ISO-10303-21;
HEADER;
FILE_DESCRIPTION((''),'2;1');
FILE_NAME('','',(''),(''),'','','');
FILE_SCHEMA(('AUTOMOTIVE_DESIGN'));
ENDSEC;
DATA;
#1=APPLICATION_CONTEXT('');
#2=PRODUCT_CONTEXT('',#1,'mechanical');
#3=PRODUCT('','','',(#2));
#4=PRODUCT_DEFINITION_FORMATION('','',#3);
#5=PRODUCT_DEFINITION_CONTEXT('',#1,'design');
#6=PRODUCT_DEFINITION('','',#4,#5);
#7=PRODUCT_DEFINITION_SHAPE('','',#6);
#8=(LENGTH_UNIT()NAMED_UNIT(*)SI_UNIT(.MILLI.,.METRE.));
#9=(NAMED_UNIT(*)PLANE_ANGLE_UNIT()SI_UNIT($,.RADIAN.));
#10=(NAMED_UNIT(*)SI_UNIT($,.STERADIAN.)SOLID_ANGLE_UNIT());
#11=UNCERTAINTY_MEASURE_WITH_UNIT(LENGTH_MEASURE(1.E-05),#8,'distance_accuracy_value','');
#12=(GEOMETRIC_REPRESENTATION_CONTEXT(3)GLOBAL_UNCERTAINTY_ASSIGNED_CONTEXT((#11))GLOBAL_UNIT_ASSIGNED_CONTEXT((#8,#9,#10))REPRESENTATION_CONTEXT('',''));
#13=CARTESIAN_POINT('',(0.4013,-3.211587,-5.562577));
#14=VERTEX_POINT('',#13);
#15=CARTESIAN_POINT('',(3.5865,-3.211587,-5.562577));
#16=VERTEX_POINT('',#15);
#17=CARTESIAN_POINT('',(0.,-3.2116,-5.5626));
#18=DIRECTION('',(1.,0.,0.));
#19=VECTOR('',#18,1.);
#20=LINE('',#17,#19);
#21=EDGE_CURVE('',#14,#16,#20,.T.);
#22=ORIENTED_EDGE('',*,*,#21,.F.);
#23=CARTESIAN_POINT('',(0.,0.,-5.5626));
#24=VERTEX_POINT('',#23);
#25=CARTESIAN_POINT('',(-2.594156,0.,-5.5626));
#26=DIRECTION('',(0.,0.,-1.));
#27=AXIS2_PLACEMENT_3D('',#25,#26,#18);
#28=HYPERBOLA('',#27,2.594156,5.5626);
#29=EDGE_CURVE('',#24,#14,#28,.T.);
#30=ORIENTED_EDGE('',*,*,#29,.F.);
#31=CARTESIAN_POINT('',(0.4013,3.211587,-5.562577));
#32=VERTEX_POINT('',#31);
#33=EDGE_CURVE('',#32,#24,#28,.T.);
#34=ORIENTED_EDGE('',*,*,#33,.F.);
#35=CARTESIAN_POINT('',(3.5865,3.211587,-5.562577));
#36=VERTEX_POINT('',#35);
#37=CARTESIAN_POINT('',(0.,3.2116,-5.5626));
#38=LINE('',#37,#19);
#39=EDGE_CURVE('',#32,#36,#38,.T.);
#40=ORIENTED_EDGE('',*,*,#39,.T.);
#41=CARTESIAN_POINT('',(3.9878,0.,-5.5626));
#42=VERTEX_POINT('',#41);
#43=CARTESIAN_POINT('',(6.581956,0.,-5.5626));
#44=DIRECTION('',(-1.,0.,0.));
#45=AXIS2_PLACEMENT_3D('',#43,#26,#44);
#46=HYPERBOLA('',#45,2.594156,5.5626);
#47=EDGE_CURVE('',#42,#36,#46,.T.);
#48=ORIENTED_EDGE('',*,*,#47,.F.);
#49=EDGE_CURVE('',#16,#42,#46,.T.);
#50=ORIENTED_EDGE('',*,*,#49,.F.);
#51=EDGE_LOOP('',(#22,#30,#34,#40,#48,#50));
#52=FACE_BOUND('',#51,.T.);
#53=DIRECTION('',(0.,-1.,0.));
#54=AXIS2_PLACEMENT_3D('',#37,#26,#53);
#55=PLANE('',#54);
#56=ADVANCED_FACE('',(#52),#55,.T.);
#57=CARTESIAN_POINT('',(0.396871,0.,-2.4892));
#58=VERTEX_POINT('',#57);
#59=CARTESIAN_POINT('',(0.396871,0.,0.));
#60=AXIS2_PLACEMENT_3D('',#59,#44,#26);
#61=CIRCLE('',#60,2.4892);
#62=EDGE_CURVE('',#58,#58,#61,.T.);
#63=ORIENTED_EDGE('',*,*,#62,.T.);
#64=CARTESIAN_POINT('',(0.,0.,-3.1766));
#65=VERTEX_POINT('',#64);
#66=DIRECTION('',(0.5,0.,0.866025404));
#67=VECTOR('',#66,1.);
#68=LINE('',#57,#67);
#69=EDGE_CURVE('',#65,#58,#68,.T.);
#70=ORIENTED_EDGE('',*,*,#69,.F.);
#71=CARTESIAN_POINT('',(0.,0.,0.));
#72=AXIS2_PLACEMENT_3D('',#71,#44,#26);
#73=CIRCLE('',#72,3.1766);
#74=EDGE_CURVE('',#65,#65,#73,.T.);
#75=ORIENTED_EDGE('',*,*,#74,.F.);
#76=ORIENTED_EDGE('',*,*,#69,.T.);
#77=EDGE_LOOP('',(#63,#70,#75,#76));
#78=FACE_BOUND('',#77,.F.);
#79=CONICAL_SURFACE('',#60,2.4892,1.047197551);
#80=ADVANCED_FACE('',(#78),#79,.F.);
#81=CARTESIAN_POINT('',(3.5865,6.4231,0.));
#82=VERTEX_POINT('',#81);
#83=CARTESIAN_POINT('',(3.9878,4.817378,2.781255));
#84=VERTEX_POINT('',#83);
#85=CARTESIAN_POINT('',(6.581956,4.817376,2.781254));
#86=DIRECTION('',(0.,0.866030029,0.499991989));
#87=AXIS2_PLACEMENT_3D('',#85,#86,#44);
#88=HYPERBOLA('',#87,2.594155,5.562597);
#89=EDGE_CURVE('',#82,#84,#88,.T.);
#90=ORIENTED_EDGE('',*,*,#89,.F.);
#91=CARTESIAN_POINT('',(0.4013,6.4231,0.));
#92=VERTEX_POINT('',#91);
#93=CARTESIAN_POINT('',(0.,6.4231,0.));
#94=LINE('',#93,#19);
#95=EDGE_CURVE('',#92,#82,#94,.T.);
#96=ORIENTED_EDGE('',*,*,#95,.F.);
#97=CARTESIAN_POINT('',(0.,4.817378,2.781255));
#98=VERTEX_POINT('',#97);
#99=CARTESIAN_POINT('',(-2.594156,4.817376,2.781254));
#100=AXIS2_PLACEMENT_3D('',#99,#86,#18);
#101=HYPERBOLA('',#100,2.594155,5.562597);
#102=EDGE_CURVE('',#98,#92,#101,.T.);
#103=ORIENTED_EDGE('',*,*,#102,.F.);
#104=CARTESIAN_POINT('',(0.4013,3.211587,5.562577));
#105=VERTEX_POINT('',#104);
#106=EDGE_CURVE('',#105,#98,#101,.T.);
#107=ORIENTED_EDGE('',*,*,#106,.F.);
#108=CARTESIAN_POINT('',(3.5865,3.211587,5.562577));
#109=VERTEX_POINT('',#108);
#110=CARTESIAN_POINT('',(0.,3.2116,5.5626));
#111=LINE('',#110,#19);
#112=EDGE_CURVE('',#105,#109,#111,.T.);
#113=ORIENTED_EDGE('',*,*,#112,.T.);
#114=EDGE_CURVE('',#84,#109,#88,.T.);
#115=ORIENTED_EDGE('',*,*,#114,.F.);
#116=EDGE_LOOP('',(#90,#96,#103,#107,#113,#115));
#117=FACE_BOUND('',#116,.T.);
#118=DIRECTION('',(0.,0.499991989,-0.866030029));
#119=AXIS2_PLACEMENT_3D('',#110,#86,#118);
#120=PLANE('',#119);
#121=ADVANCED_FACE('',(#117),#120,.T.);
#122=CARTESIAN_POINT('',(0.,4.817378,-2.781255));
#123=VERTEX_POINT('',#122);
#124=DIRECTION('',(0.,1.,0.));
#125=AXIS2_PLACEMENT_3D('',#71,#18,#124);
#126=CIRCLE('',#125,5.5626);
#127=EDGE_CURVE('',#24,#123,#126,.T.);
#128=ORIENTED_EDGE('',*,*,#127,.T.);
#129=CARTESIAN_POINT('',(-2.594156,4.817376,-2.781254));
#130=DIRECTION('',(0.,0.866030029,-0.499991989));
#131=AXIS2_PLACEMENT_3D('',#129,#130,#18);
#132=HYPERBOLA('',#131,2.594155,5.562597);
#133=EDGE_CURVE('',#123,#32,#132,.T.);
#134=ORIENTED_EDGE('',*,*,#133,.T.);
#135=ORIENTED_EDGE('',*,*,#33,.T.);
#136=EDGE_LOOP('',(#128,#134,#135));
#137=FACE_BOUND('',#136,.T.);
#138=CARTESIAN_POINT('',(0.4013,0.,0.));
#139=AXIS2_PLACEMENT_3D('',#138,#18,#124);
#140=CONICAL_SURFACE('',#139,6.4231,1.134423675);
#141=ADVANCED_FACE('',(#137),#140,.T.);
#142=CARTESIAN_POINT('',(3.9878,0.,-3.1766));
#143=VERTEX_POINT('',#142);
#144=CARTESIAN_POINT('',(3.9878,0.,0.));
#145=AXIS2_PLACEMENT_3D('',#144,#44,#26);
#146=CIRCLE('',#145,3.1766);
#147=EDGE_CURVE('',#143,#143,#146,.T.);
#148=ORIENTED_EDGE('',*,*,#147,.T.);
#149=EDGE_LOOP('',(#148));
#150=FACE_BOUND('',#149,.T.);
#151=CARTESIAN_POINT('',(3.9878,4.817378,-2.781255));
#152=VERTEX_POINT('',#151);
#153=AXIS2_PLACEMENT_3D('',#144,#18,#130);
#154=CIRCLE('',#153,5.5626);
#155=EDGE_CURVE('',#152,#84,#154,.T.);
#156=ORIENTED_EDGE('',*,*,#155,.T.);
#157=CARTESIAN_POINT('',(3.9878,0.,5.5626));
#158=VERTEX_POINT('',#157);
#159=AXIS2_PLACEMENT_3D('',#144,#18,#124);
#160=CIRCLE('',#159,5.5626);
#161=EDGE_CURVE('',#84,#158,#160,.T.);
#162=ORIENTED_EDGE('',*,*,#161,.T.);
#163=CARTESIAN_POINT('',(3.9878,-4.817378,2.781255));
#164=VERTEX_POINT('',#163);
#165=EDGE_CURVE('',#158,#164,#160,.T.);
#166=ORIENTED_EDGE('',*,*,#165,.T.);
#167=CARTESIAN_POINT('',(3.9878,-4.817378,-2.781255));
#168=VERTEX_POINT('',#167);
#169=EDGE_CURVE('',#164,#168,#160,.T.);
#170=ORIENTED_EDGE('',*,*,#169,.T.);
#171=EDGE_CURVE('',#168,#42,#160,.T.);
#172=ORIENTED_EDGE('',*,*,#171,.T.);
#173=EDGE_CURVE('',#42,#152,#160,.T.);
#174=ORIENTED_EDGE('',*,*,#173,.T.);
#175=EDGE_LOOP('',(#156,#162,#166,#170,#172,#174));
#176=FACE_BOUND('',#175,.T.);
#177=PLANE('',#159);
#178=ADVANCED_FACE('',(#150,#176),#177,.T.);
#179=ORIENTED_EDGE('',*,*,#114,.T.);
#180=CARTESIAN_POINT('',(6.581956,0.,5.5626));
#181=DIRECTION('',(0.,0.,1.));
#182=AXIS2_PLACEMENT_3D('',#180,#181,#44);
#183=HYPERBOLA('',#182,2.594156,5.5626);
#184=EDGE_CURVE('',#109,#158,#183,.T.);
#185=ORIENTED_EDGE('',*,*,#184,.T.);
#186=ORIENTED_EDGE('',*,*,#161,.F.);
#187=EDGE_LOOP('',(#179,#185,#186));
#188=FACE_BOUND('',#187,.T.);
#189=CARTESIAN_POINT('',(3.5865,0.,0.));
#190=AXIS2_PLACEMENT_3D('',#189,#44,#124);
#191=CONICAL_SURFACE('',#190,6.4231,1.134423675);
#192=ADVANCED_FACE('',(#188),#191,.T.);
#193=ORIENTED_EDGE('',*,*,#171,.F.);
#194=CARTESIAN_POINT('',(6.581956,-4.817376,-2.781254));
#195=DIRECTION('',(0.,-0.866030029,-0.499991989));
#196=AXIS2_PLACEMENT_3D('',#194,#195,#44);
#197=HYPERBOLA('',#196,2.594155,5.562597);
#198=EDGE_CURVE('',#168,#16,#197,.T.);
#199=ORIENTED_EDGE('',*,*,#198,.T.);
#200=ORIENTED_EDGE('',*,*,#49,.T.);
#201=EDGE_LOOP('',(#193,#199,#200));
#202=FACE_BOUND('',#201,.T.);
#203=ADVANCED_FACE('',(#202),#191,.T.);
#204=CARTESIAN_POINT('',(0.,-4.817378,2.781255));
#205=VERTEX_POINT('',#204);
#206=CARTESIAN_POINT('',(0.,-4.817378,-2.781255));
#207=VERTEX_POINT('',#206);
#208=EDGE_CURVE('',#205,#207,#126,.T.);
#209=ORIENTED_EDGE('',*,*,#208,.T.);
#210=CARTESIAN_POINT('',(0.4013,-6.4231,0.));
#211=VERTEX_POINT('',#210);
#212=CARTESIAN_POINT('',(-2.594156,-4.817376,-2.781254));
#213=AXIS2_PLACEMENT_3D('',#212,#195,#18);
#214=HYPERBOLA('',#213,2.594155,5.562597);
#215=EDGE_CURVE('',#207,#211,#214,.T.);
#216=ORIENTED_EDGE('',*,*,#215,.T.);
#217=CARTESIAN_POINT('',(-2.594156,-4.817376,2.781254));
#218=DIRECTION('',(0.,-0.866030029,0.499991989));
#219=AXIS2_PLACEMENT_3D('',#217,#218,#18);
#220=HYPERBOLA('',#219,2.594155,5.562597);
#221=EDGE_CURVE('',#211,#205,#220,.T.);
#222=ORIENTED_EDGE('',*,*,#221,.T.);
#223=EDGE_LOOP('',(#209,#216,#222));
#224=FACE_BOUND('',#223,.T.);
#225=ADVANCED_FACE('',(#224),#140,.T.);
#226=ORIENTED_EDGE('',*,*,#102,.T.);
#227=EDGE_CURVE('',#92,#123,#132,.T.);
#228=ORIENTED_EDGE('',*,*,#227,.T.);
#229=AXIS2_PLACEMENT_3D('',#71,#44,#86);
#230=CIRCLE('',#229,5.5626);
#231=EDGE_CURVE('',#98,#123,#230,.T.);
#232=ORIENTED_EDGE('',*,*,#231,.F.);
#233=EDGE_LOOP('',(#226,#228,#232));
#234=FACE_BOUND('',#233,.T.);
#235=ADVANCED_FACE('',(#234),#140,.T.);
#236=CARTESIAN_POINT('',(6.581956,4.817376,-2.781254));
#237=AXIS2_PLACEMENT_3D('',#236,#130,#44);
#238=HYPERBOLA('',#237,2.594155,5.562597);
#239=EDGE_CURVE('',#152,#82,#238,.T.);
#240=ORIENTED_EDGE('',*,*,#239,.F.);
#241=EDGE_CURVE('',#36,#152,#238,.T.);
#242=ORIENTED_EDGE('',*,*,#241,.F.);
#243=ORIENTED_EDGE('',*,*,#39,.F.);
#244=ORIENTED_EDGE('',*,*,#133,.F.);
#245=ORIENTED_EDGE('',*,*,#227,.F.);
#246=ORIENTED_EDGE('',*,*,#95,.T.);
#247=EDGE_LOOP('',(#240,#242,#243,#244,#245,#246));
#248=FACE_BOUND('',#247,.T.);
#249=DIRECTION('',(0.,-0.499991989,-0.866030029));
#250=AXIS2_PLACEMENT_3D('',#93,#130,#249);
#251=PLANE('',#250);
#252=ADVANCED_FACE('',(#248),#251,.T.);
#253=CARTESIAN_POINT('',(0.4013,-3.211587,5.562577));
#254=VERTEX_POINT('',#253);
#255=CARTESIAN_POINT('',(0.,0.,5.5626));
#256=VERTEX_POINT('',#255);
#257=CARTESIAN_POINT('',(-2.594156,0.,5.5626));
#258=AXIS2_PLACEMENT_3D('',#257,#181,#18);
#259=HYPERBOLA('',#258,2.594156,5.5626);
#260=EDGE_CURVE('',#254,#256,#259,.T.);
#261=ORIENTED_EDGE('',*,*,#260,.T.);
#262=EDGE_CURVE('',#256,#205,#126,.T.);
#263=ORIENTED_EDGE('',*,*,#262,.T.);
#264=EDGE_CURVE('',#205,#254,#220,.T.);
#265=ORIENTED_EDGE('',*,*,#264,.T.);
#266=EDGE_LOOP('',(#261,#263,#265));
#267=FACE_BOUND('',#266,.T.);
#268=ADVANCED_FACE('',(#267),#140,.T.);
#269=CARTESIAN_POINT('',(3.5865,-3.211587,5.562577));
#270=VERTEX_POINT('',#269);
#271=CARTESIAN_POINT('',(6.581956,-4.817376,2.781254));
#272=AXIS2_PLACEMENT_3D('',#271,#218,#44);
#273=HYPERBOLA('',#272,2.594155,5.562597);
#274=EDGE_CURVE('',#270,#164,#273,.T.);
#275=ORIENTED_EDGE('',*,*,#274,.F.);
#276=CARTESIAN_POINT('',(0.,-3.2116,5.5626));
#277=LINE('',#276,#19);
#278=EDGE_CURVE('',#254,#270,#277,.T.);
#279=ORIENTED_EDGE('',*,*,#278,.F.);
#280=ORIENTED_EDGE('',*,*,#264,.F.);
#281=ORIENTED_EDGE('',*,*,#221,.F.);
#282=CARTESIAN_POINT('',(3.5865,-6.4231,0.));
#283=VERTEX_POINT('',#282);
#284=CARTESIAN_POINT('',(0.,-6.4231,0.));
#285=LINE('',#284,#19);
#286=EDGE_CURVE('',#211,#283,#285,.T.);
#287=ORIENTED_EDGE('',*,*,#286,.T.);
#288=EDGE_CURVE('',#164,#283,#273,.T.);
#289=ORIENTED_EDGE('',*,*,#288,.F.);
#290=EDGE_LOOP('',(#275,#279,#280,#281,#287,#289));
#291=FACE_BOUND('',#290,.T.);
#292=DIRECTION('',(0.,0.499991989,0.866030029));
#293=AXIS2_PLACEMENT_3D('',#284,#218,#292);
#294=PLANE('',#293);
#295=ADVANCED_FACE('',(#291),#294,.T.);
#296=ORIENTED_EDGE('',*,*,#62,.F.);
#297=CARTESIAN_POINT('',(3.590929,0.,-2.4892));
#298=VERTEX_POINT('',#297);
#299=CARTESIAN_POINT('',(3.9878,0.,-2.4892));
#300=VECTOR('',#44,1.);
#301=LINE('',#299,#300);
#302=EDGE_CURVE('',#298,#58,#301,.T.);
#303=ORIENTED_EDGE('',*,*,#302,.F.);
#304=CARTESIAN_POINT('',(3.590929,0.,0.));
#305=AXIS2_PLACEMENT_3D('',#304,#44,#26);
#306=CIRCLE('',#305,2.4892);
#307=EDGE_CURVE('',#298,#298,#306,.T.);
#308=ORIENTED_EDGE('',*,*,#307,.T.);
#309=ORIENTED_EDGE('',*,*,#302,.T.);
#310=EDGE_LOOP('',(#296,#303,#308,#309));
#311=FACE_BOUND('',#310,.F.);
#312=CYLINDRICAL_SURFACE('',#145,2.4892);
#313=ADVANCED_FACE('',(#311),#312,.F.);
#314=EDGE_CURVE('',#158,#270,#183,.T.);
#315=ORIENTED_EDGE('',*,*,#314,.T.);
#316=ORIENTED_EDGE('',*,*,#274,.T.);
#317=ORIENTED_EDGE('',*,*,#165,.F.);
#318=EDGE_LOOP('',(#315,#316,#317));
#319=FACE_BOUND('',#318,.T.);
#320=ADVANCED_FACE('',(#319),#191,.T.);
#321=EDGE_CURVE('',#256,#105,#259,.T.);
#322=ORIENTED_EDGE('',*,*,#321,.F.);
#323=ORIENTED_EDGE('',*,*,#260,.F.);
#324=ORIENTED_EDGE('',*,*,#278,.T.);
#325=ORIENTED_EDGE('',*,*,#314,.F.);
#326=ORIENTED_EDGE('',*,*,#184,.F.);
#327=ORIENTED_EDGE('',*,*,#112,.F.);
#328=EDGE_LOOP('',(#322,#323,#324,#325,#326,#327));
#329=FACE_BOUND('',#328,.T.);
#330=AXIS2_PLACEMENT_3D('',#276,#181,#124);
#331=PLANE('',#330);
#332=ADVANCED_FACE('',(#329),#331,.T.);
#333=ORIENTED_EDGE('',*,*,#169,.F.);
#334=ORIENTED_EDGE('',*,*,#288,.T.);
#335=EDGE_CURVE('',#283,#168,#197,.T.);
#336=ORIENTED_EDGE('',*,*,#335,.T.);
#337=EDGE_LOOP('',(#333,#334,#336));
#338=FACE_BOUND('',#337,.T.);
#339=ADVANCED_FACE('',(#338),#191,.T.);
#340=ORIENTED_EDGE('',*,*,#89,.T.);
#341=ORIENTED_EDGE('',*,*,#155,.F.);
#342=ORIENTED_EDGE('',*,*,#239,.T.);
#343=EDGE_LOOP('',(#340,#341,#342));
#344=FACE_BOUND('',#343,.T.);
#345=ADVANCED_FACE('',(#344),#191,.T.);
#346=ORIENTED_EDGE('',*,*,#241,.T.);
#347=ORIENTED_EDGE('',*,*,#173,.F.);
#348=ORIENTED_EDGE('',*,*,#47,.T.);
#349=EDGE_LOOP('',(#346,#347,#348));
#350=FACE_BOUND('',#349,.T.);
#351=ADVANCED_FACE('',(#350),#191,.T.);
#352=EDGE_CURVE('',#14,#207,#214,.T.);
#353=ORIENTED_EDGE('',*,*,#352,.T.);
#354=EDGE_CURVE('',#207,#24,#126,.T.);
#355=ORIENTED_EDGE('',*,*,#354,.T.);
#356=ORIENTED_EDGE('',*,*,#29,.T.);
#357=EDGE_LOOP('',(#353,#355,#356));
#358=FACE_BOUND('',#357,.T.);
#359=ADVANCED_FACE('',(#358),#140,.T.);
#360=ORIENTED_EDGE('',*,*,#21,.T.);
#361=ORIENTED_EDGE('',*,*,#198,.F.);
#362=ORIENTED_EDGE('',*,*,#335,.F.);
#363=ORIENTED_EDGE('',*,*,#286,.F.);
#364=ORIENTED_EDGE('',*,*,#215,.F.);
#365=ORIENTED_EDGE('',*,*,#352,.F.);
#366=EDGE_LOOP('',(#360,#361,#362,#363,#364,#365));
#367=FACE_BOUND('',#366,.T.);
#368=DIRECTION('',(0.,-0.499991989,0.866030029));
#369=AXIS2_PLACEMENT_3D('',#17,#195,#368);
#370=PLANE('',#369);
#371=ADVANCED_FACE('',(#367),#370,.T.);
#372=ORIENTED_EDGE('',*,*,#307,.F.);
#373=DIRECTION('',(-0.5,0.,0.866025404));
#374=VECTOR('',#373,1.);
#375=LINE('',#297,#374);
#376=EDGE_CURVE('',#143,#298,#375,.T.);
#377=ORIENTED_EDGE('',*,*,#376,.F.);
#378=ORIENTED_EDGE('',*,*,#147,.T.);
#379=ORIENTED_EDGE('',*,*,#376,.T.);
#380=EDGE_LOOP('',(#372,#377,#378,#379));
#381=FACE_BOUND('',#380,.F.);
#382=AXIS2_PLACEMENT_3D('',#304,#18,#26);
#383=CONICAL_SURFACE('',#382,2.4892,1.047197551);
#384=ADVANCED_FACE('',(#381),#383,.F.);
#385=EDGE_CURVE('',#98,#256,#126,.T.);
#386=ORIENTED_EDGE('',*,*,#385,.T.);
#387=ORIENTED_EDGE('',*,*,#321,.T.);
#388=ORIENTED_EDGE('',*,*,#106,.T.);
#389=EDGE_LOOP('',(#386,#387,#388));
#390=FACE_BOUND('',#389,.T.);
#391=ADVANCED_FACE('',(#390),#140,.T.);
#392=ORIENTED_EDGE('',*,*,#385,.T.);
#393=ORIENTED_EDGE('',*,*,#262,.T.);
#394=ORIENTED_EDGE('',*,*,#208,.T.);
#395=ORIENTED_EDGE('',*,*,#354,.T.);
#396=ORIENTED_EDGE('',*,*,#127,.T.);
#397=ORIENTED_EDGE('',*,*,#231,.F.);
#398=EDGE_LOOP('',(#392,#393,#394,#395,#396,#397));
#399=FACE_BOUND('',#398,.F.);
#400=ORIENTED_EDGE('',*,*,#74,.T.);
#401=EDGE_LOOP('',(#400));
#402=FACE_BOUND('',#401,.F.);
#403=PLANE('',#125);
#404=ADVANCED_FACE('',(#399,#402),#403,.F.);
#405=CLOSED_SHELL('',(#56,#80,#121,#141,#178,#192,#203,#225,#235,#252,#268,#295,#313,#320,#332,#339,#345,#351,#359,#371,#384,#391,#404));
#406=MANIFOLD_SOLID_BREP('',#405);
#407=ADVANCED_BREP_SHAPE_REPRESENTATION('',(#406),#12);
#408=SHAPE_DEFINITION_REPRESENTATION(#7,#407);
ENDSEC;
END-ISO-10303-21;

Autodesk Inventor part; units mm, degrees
ref_plane "YZ Plane" through (0, 0, 0) normal (1, 0, 0) x (0, 1, 0)
ref_plane "XZ Plane" through (0, 0, 0) normal (0, 1, 0) x (-1, 0, 0)
sketch "Boceto1" plane through (0, 0, 0) normal (1, 0, 0) x (0, 1, 0)
  line L0 (-6.4231, 0) -> (-3.2116, 5.5626)
  line L1 (-3.2116, 5.5626) -> (3.2116, 5.5626)
  line L2 (3.2116, 5.5626) -> (6.4231, 0)
  line L3 (6.4231, 0) -> (3.2116, -5.5626)
  line L4 (3.2116, -5.5626) -> (-3.2116, -5.5626)
  line L5 (-3.2116, -5.5626) -> (-6.4231, 0)
  point P0 (0, 0)
  point P1 (0, 0)
  dimension "d0" = 12.8463
extrude "Cuerpo" add sketch "Boceto1" along normal blind 3.9878
sketch "Boceto2" plane through (0, 0, 0) normal (0, 0, 1) x (1, 0, 0)
  line L0 (0, 3.2116) -> (0, 6.4231) projected
  line L1 (0, 6.4231) -> (3.9878, 6.4231) projected
  line L2 (3.9878, 3.2116) -> (3.9878, 6.4231) projected
  line L3 (-0.7976, 0) -> (4.7854, 0) projected
  line L4 (0.4013, 6.4231) -> (0, 5.5626)
  line L5 (3.5865, 6.4231) -> (3.9878, 5.5626)
  dimension "d3" = 25
  dimension "d4" = 25
  dimension "d5" = 11.1252
  dimension "d6" = 11.1252
revolve "Chaflán1" cut sketch "Boceto2" angle 360 about axis through (-10, 0, 0) along (1, 0, 0)
sketch "Boceto3" plane through (3.9878, 0, 0) normal (1, 0, 0) x (0, 0, -1)
  arc A0 (-2.7813, -4.8174) -> (2.7813, -4.8174) centre (0, 0) ccw projected
hole "Rosca" at (3.9878, 0, 0) direction (-1, 0, 0) diameter 4.9784 end through all thread size "1/4-20 UNC" class "2B" standard "ANSI Unified Screw Threads"
chamfer "Chaflán2" distance 0.6874 angle 30 1 edges at (3.9878, 0, 2.4892) measured on face at (3.9878, 4.5118, 0.1)
chamfer "Chaflán3" distance 0.6874 angle 30 1 edges at (0, 0, 2.4892) measured on face at (0, 4.5118, 0.1)
ref_plane "Work Plane1" through (-13.4678, 0, 0) normal (0, -0.8660254, -0.5) x (1, 0, 0)
equation "\"d0\" = 1.1547 * SW"
equation "\"d1\" = KOH"
equation "\"d3\" = ANG1"
equation "\"d4\" = ANG2"
equation "\"d5\" = SW0"
equation "\"d6\" = SW01"
equation "\"d8\" = -0.5 * GD1 + 0.5 * NND"
equation "\"d40\" = -0.5 * GD1 + 0.5 * NND"
equation "\"d10\" = -0.5 * GD1 + 0.5 * NND"
equation "\"d41\" = -0.5 * GD1 + 0.5 * NND"
equation "\"ANG1\" = 25deg"
equation "\"ANG2\" = 25deg"
equation "\"NND\" = 6.35"
equation "\"KOH\" = 3.9878"
equation "\"SW\" = 11.1252"
equation "\"SW0\" = SW"
equation "\"SW01\" = SW"
equation "\"THREADDIA\" = 6.35"
equation "\"TOA\" = 30deg"
equation "\"E0\" = 1.155 * SW"
equation "\"GD1\" = 4.975185"
properties part number "ANSI B18.2.2 - 1/4 - 20, HJNI" material "Acero, suave"
